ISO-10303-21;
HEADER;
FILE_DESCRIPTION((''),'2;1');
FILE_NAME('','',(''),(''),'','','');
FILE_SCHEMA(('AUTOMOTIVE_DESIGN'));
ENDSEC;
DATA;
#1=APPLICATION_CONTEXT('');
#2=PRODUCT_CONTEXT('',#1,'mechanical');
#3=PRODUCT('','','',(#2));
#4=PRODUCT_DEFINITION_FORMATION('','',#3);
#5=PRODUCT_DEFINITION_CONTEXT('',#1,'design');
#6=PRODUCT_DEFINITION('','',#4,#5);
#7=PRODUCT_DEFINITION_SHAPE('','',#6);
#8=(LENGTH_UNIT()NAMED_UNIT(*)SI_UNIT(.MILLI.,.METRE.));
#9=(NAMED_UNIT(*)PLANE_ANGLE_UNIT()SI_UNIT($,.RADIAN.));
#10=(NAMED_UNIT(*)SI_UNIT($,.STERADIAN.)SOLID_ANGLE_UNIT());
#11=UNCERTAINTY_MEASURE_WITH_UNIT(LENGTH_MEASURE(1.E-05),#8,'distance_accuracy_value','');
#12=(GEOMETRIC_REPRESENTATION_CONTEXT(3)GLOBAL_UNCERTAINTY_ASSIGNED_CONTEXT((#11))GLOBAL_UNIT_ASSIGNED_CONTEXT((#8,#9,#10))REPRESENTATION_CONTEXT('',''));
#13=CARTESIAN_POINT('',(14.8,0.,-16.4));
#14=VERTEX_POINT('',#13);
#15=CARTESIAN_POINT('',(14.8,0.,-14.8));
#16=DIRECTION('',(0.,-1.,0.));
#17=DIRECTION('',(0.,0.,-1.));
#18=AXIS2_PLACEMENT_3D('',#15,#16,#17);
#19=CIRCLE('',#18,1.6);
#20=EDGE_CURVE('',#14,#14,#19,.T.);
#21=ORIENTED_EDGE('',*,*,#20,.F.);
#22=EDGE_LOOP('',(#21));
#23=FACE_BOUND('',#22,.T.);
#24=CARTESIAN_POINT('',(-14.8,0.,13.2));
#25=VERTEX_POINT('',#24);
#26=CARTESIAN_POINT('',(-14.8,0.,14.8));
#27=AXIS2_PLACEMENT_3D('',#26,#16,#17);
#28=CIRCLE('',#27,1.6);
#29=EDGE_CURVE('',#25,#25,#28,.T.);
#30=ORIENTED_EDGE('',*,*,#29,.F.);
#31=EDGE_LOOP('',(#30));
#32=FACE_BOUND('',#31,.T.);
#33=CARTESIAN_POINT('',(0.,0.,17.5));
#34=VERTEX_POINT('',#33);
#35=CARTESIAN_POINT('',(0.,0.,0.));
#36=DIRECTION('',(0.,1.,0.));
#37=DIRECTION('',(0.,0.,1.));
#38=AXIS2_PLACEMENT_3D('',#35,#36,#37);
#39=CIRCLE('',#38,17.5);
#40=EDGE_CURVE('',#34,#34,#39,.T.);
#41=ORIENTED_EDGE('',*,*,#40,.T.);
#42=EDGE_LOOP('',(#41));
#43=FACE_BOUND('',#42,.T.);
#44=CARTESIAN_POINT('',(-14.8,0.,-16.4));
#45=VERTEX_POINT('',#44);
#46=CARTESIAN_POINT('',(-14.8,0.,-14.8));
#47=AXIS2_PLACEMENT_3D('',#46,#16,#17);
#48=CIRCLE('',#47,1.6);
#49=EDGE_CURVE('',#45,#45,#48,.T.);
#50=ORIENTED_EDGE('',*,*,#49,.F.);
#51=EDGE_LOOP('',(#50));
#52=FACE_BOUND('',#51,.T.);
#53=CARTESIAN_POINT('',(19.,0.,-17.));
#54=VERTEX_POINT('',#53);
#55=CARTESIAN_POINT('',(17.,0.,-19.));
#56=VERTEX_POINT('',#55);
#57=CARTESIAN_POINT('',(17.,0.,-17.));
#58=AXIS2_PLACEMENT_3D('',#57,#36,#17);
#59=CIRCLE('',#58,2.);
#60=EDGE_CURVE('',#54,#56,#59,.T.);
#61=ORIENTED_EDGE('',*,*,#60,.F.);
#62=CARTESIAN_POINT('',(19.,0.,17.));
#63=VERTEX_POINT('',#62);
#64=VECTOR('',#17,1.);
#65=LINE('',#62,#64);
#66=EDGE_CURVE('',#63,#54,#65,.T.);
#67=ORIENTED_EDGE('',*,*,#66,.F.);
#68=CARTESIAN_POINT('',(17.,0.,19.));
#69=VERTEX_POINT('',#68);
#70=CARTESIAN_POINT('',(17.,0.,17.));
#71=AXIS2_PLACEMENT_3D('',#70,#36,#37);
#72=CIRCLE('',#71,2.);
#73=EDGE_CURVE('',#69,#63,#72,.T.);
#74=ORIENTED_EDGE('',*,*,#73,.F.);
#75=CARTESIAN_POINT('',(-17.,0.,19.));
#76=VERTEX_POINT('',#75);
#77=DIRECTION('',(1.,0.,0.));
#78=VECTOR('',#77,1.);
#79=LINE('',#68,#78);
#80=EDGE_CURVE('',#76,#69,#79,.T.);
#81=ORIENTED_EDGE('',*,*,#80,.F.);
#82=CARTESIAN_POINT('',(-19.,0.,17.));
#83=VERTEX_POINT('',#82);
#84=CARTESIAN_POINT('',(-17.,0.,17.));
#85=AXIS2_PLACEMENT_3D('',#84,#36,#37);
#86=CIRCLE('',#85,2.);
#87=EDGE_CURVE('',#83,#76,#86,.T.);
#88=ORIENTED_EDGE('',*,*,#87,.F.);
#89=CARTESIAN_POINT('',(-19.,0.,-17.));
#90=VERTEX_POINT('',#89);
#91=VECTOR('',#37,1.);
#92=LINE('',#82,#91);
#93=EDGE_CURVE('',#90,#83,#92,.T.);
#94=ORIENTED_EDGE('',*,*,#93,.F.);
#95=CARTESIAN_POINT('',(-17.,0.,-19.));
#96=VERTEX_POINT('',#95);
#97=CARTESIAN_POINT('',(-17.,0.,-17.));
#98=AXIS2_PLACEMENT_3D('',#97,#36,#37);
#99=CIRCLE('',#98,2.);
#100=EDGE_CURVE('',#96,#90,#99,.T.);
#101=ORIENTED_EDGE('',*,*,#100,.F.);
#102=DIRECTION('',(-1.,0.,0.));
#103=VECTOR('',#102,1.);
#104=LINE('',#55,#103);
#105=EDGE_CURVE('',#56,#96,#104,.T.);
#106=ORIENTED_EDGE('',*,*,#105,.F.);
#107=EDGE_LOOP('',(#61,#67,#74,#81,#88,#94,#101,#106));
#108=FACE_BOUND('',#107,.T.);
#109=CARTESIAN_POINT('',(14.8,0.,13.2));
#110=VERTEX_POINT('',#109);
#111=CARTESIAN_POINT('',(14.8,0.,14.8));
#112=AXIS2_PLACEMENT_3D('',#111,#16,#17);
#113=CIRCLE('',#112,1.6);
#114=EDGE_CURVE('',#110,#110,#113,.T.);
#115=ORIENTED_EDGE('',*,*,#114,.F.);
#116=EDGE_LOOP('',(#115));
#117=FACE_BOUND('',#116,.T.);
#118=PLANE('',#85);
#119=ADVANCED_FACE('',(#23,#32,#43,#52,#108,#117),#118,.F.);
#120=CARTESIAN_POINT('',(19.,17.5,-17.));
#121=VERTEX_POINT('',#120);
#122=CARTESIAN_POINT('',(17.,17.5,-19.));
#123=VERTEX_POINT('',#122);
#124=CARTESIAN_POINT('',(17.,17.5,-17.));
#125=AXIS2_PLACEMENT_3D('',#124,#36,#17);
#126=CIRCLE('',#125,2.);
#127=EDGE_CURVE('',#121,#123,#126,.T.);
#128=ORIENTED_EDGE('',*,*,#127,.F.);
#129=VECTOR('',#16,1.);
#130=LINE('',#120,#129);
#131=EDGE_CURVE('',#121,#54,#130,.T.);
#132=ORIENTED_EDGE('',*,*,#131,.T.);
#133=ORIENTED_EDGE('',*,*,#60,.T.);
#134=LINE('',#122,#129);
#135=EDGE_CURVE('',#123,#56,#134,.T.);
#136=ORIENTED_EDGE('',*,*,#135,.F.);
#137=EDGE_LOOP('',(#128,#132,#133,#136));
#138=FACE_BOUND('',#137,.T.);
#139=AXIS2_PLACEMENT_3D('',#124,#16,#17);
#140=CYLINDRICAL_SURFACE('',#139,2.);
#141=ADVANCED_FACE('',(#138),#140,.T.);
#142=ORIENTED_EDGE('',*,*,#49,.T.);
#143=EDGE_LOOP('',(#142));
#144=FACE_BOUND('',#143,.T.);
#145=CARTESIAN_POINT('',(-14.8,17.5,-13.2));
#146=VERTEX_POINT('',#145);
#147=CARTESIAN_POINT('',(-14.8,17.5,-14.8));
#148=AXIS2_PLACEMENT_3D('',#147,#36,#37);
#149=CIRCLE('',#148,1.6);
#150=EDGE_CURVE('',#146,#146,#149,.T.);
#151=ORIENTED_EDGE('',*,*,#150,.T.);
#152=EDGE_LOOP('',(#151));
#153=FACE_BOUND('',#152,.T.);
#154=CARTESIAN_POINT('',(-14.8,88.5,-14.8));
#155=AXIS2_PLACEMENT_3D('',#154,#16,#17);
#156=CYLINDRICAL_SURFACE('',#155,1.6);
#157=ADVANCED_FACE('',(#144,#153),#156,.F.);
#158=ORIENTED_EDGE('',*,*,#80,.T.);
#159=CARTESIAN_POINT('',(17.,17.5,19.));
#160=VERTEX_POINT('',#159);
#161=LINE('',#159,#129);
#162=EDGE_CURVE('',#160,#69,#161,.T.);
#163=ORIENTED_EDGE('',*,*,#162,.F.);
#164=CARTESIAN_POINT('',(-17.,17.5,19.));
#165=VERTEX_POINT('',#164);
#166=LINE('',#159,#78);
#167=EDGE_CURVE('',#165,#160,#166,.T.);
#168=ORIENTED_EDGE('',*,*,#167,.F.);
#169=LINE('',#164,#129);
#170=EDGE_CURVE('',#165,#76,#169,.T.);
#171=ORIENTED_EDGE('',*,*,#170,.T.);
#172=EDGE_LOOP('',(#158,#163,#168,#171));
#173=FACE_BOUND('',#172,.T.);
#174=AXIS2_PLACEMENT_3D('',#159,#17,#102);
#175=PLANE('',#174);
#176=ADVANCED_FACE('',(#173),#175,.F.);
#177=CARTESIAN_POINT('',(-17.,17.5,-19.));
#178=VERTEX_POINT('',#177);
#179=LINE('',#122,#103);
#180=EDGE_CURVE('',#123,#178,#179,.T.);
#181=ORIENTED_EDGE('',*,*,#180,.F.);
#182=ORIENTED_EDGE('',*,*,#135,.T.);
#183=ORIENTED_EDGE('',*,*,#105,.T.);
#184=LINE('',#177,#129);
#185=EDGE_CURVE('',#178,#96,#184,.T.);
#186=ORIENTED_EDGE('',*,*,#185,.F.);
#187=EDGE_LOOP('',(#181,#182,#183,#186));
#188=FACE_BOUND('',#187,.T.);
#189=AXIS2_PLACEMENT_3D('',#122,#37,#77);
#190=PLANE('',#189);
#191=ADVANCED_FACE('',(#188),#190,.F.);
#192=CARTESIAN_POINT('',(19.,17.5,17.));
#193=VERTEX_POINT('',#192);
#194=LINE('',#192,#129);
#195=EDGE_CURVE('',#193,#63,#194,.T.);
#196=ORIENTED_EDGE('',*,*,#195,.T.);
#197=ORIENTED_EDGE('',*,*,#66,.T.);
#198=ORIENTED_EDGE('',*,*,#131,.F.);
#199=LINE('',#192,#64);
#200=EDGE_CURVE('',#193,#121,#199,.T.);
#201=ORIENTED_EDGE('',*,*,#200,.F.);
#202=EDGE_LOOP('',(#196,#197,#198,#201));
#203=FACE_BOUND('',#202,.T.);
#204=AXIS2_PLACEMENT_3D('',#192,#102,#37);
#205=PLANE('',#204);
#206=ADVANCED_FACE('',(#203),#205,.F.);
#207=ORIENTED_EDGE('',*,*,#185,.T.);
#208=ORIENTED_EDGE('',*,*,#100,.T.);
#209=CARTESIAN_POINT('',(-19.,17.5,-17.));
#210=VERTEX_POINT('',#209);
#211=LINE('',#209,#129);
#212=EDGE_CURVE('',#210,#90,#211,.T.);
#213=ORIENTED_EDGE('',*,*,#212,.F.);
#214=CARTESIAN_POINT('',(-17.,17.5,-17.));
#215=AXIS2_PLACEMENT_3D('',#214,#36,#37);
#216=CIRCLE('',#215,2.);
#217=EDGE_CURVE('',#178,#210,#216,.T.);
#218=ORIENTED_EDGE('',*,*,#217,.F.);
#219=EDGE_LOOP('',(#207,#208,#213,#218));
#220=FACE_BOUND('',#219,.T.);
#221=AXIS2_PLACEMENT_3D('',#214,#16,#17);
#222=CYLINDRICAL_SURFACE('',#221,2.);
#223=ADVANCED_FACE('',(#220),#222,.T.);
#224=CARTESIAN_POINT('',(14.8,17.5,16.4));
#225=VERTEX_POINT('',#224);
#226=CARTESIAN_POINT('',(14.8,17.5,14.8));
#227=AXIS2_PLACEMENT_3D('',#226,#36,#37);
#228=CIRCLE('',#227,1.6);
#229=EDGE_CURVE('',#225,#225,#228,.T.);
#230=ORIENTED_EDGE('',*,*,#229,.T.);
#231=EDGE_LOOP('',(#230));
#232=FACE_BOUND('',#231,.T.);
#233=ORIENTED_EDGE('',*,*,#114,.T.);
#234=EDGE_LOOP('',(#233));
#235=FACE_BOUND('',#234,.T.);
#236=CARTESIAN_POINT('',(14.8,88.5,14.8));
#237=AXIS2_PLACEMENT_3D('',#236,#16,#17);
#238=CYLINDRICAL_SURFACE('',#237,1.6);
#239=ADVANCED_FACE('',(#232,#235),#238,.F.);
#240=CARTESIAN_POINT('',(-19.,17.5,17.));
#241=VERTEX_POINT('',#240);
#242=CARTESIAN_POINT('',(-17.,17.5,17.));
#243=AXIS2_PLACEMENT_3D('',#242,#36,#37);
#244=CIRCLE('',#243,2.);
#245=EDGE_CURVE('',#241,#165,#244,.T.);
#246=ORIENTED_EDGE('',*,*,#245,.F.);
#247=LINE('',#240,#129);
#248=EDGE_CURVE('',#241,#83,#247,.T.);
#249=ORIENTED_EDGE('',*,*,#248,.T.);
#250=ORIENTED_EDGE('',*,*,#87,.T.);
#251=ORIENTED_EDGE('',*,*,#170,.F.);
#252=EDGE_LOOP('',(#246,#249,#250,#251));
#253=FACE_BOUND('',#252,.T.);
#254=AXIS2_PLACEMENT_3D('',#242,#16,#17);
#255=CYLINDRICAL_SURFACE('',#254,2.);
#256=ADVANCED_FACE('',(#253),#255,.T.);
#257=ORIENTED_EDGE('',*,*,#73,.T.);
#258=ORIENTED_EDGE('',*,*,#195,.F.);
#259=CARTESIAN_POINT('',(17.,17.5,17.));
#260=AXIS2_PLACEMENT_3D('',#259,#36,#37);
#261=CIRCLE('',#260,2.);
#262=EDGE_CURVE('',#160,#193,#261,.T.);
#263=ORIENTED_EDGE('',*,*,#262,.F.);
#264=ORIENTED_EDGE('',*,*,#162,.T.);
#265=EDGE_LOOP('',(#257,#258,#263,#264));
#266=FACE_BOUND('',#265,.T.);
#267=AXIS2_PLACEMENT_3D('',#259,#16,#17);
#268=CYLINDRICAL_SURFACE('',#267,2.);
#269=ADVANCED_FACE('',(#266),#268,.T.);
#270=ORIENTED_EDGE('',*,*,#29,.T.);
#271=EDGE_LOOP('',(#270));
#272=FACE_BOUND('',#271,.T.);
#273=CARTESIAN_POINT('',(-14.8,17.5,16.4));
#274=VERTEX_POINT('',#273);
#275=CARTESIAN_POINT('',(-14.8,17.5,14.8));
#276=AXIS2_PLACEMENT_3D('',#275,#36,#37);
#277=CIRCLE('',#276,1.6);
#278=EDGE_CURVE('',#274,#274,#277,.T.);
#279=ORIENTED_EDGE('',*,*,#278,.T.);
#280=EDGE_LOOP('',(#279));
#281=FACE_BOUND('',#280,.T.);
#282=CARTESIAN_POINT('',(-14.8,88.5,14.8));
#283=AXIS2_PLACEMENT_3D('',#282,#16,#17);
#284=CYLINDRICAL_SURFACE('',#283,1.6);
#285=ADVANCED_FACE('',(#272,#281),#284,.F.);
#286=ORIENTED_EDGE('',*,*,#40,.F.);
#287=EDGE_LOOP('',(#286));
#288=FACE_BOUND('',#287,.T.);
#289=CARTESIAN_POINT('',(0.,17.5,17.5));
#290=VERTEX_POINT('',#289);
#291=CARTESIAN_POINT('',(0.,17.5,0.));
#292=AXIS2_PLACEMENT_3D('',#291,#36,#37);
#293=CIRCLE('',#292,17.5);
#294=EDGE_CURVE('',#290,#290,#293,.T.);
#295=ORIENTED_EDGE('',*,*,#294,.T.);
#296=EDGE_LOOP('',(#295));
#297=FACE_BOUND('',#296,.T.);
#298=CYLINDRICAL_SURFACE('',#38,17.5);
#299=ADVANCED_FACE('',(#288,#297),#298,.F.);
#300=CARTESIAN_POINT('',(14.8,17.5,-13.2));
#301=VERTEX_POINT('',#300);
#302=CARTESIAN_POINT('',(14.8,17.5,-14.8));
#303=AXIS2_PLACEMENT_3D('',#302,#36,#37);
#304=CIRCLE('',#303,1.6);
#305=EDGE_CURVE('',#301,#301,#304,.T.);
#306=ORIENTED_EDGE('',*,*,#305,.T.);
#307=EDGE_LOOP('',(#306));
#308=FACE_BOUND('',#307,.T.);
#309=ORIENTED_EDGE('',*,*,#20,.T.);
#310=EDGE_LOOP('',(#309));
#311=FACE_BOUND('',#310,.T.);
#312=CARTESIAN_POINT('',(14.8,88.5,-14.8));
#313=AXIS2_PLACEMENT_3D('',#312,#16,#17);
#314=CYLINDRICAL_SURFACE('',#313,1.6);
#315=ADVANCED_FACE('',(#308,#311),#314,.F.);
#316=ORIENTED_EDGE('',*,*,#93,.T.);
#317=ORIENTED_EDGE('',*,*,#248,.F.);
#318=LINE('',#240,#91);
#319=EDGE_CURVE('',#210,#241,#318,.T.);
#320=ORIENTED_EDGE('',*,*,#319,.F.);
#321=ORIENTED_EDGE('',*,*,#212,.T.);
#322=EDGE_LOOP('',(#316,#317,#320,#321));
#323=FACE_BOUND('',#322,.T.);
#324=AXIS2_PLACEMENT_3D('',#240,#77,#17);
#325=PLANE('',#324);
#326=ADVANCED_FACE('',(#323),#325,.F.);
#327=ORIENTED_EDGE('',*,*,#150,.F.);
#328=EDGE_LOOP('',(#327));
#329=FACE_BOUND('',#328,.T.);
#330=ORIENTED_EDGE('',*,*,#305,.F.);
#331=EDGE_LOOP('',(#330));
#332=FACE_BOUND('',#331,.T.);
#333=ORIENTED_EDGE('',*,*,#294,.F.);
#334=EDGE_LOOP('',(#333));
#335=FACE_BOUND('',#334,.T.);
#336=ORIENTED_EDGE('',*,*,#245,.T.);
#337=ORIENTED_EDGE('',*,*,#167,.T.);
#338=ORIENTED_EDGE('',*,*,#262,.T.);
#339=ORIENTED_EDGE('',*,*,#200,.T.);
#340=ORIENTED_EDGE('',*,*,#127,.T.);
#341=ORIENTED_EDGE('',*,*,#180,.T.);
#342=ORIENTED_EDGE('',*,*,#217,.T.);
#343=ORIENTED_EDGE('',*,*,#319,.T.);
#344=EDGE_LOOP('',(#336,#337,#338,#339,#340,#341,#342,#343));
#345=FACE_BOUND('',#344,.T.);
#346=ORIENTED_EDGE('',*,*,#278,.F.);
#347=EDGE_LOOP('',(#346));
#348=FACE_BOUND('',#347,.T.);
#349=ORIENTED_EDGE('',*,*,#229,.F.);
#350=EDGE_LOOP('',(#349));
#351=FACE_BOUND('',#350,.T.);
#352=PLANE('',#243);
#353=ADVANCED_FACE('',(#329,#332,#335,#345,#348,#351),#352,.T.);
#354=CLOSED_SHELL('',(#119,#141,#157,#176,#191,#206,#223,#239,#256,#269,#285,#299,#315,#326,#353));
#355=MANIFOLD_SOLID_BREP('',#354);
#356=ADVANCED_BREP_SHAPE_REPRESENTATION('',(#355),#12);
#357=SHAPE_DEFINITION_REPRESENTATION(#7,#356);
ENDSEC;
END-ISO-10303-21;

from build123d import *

# Parameters (mm, degrees)
STOCK_MULTIBODY_1_OUTLINE_R   = 1.6
STOCK_MULTIBODY_1_OUTLINE_R_2 = 8.85
STOCK_MULTIBODY_1_DEPTH       = 17.5
CUT_EXTRUDE1_DEPTH            = 33.06633749
CUT_EXTRUDE1_DEPTH_BACK       = 33.06633749
SKETCH1_R                     = 17.5


# Read off the part's stored shape, not the designer's step: Stock-Multibody-1
with BuildPart() as part:
    # Stock-Multibody-1 outline → Stock-Multibody-1 (new body)
    with BuildSketch(Plane(origin=(0, 0, 0), x_dir=(1, 0, 0), z_dir=(0, 1, 0))):
        with BuildLine():
            ThreePointArc((-19, -17), (-18.414213562, -18.414213562), (-17, -19))
            Line((-17, -19), (17, -19))
            ThreePointArc((17, -19), (18.414213562, -18.414213562), (19, -17))
            Line((19, -17), (19, 17))
            ThreePointArc((19, 17), (18.414213562, 18.414213562), (17, 19))
            Line((17, 19), (-17, 19))
            ThreePointArc((-17, 19), (-18.414213562, 18.414213562), (-19, 17))
            Line((-19, 17), (-19, -17))
        make_face()
        with Locations((-14.8, -14.8)):
            Circle(STOCK_MULTIBODY_1_OUTLINE_R, mode=Mode.SUBTRACT)
        with Locations((14.8, -14.8)):
            Circle(STOCK_MULTIBODY_1_OUTLINE_R, mode=Mode.SUBTRACT)
        with Locations((-14.8, 14.8)):
            Circle(STOCK_MULTIBODY_1_OUTLINE_R, mode=Mode.SUBTRACT)
        Circle(STOCK_MULTIBODY_1_OUTLINE_R_2, mode=Mode.SUBTRACT)
        with Locations((14.8, 14.8)):
            Circle(STOCK_MULTIBODY_1_OUTLINE_R, mode=Mode.SUBTRACT)
    extrude(amount=STOCK_MULTIBODY_1_DEPTH)

    # Sketch1 → Cut-Extrude1 (cut, two sides: drawn at the far end of the back side and taken through both)
    with BuildSketch(Plane(origin=(0, 17.5, 0), x_dir=(1, 0, 0), z_dir=(0, 1, 0)).offset(-CUT_EXTRUDE1_DEPTH_BACK)):
        with Locations(Location((0, 0, 0), (0, 0, 270))):
            Circle(SKETCH1_R)
    extrude(amount=CUT_EXTRUDE1_DEPTH + CUT_EXTRUDE1_DEPTH_BACK, mode=Mode.SUBTRACT)


solid = part.part
